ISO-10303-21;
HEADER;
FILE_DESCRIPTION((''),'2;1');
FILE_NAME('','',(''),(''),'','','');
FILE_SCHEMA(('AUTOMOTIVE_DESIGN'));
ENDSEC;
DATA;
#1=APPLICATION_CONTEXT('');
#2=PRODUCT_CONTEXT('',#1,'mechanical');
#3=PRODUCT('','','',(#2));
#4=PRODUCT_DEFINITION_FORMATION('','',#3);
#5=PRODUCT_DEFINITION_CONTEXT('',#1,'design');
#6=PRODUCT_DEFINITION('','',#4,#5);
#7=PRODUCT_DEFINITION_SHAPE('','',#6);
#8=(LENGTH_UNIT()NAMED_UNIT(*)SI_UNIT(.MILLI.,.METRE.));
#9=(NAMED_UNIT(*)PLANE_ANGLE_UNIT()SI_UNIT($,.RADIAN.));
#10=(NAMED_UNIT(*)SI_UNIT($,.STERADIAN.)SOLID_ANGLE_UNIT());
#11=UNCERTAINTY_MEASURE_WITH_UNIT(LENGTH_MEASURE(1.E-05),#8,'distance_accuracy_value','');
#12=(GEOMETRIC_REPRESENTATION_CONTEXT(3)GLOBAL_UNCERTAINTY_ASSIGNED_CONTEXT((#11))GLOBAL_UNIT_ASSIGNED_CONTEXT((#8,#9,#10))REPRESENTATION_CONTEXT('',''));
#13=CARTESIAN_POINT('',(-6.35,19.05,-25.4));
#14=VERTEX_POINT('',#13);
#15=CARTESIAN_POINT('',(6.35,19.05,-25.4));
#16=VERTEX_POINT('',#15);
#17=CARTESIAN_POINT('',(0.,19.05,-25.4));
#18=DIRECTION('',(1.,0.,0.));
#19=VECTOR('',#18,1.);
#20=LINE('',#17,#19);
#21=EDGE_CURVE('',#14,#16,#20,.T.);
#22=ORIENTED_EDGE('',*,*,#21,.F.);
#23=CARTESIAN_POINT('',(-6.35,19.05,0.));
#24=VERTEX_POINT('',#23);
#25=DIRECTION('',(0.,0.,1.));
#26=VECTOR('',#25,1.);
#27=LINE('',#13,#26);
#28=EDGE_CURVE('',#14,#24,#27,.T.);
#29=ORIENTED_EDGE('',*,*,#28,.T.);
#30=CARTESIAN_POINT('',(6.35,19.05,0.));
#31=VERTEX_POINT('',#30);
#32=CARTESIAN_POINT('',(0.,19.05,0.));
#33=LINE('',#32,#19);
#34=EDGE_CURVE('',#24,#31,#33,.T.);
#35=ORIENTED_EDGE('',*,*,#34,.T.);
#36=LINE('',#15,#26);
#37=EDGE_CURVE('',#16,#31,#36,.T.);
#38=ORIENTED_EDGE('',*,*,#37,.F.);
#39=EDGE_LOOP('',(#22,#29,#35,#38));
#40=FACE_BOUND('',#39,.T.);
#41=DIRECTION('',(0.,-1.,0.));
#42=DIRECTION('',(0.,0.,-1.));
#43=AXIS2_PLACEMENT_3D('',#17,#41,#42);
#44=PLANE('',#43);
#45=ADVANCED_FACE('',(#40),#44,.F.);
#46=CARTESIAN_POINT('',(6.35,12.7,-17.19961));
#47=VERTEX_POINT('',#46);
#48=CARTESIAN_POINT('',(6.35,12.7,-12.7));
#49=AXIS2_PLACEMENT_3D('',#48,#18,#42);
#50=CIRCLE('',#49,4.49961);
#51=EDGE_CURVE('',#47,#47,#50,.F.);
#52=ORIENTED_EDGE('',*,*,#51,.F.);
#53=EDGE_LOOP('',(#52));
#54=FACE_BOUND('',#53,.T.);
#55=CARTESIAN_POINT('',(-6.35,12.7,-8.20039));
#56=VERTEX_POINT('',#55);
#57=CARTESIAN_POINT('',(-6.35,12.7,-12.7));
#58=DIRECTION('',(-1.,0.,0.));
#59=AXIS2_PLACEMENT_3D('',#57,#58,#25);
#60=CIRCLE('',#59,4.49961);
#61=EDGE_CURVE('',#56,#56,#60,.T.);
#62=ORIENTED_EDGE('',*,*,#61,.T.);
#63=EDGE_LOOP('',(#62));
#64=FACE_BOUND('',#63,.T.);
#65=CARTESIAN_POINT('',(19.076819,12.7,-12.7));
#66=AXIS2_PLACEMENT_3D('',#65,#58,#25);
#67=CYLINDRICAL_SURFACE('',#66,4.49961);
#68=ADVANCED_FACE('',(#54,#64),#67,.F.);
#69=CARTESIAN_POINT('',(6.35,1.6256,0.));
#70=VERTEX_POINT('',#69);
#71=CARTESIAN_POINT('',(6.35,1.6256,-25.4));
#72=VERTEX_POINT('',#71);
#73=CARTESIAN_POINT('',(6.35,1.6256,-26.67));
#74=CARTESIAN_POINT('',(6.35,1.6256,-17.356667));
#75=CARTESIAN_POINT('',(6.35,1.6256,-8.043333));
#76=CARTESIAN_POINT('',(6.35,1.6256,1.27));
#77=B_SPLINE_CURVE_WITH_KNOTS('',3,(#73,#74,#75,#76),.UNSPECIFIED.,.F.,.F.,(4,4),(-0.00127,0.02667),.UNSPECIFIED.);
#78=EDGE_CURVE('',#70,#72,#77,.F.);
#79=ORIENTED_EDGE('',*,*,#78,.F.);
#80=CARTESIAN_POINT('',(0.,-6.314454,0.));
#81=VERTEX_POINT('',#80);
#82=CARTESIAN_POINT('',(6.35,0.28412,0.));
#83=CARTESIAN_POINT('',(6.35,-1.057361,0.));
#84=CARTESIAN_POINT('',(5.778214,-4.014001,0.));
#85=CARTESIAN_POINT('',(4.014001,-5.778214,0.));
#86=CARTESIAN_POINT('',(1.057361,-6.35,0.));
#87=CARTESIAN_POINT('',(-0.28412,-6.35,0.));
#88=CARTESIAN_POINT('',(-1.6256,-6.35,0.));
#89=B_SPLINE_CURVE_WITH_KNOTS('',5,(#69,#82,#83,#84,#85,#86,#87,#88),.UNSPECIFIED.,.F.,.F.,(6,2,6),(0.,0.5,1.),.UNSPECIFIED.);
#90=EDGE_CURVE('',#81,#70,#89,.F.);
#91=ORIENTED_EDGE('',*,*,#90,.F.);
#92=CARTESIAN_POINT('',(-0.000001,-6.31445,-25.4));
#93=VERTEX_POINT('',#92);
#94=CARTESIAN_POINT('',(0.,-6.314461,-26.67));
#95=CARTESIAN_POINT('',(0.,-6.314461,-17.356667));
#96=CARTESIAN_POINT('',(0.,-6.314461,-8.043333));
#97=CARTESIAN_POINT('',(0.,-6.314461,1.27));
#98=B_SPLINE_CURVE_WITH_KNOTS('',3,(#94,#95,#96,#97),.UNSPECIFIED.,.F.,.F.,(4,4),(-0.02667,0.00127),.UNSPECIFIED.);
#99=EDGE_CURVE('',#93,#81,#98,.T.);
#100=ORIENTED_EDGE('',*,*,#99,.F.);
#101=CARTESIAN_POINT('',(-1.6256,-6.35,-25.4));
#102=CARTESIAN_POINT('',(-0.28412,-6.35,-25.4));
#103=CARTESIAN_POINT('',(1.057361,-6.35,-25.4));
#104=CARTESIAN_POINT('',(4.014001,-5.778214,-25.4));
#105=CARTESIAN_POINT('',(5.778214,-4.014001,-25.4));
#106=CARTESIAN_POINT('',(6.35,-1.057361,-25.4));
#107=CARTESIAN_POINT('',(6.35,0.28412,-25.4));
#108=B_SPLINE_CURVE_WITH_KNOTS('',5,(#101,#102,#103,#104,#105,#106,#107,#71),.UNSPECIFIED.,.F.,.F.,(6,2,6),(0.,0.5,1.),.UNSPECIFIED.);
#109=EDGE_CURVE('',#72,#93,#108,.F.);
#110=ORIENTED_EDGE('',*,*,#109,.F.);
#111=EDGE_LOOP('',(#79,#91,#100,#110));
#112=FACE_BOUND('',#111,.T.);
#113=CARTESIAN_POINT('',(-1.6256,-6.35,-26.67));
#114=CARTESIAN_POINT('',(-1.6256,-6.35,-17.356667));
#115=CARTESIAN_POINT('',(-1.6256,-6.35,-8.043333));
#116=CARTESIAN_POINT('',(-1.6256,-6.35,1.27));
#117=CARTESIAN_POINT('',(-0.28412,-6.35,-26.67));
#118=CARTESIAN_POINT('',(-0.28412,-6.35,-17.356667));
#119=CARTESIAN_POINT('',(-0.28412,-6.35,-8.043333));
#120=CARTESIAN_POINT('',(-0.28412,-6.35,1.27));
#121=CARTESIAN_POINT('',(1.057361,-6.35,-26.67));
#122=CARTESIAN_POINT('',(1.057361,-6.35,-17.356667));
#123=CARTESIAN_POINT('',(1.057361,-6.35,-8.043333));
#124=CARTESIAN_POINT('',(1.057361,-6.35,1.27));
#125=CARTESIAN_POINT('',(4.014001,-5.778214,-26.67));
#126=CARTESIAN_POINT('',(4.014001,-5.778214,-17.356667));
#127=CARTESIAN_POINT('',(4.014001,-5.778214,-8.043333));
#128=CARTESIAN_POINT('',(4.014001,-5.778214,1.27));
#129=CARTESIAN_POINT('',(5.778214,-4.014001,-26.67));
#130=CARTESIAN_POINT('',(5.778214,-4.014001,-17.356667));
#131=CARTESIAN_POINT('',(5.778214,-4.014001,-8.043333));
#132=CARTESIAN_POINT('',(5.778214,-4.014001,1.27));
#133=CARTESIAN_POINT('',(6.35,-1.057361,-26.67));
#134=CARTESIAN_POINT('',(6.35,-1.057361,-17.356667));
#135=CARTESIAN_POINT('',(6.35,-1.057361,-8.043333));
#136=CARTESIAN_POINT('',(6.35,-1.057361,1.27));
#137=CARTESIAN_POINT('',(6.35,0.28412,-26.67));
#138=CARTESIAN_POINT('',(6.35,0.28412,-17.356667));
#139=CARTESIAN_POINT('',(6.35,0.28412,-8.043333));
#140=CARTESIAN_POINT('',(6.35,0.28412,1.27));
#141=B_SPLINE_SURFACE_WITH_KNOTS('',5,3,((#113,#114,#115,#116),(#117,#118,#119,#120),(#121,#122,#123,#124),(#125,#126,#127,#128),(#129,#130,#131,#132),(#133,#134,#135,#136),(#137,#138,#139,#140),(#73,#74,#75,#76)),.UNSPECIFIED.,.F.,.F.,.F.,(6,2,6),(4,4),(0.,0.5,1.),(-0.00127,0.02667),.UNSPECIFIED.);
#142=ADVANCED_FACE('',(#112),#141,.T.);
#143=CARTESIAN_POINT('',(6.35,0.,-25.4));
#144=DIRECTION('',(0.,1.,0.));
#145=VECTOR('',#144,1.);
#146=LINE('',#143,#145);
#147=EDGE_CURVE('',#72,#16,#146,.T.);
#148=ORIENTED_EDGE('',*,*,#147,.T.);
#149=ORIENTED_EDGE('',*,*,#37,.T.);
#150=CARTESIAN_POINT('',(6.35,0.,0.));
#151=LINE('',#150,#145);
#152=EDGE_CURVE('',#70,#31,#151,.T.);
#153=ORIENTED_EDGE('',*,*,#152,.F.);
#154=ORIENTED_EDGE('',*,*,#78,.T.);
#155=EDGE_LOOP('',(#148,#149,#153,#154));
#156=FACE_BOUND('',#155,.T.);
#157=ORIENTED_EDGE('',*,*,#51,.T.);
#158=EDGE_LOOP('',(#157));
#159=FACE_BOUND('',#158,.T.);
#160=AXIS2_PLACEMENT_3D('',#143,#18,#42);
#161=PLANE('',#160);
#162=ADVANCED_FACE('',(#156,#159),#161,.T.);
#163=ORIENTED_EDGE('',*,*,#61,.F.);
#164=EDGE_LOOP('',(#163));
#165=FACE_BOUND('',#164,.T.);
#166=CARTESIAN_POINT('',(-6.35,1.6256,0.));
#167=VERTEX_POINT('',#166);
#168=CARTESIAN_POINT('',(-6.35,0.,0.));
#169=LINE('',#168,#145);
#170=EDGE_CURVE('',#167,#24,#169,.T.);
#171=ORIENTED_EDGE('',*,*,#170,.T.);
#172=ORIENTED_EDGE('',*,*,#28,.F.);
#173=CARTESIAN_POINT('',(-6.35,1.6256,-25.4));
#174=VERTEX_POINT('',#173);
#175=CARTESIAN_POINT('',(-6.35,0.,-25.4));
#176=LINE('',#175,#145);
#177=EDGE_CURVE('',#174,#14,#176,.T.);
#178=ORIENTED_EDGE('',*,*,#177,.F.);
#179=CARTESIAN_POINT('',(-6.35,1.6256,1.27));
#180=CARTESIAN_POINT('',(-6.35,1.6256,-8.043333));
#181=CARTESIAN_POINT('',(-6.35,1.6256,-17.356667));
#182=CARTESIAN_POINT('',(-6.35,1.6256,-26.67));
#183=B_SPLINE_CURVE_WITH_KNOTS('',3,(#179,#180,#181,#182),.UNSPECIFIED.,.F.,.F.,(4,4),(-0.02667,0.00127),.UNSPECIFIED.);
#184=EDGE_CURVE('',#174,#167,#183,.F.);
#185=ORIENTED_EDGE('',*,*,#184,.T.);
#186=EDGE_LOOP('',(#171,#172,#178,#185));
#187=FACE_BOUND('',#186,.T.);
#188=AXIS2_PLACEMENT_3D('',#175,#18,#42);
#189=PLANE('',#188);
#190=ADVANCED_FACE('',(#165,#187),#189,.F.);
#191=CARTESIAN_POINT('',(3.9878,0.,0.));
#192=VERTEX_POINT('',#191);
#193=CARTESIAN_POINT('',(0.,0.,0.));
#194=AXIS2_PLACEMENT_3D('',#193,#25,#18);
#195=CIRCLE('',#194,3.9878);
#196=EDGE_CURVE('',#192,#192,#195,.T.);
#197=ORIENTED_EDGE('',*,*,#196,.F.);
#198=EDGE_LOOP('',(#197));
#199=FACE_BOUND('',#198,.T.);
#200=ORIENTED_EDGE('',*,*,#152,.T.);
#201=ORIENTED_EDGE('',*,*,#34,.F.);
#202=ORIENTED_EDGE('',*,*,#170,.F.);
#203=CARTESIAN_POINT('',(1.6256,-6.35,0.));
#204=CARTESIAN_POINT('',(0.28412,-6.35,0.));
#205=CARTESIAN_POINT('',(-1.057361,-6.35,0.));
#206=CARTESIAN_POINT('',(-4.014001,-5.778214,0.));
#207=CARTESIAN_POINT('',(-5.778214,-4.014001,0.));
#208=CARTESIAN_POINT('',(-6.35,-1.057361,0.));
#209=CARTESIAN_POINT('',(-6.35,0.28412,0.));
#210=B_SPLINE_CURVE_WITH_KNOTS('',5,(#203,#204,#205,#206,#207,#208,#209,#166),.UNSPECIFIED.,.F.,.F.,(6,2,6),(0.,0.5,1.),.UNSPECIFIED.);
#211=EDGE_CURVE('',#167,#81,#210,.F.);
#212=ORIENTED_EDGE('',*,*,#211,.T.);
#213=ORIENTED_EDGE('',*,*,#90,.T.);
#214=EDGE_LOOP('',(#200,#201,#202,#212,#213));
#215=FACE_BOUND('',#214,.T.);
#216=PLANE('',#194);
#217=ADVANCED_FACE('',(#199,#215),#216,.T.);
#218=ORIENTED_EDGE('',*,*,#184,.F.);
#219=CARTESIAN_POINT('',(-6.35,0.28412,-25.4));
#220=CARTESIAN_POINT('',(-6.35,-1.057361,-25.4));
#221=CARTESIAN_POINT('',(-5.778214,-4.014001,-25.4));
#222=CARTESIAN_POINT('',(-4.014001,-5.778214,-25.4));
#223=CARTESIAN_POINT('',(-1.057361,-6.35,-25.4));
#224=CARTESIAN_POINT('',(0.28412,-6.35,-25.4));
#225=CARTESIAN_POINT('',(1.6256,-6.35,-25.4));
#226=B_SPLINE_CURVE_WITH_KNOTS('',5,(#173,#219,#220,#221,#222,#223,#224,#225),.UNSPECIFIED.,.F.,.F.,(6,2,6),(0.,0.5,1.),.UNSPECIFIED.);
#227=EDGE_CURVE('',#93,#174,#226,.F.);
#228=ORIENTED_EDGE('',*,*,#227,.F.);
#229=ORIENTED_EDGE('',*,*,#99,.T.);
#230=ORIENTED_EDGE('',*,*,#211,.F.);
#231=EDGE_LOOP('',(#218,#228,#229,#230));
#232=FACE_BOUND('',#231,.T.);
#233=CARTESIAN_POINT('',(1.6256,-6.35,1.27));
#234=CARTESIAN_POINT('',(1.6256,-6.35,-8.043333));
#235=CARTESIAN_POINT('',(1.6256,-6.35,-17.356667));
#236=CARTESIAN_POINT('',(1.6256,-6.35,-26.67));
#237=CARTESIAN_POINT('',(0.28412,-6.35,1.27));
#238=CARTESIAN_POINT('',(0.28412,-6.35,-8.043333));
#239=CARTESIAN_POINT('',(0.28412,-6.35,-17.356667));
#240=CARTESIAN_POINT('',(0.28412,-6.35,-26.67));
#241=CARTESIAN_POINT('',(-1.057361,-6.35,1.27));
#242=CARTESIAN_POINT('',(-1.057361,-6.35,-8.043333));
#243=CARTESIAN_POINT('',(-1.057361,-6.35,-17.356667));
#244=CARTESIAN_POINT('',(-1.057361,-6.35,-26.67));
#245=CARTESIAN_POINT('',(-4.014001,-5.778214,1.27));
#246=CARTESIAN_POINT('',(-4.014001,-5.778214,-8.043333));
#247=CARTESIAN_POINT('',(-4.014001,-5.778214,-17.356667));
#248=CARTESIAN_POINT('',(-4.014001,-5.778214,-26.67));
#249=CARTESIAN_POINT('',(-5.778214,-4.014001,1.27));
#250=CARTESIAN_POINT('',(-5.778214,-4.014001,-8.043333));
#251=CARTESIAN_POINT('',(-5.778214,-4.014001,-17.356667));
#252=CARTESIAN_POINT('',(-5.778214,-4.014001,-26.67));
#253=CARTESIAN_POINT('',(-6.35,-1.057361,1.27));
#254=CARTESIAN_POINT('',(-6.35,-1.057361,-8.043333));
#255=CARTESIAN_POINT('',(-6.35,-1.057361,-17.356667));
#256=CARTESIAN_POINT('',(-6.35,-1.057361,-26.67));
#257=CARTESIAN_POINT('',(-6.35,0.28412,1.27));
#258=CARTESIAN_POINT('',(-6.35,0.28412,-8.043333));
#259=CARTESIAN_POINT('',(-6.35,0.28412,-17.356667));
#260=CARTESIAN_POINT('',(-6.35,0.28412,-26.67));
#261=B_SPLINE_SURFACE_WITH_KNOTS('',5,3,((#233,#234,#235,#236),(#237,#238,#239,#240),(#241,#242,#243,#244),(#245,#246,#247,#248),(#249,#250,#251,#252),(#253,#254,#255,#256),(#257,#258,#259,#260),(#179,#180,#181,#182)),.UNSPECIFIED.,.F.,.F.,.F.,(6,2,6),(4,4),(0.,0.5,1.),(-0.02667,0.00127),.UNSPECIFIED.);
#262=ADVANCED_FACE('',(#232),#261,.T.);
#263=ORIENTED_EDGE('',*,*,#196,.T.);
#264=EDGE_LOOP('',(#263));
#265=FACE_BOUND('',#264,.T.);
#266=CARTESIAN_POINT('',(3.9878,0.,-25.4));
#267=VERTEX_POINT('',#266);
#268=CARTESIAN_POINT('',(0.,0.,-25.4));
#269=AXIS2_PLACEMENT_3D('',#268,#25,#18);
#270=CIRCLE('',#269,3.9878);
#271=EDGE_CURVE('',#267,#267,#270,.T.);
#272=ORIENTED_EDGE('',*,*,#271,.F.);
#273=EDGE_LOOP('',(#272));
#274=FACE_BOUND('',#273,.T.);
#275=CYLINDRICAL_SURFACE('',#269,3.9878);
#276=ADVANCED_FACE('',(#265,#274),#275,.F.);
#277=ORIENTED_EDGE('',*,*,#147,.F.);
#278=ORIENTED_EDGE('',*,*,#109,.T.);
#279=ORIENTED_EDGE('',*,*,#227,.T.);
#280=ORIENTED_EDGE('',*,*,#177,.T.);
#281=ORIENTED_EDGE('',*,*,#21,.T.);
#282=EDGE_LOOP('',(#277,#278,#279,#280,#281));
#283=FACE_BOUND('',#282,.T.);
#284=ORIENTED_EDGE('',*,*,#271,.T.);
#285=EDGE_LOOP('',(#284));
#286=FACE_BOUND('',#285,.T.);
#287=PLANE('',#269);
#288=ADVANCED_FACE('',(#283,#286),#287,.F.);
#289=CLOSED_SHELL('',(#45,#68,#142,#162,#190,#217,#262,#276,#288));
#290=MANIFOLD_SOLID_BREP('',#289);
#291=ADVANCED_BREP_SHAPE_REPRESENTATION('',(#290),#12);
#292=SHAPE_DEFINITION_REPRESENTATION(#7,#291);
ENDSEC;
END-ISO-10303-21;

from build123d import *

# Parameters (mm, degrees)
SKETCH1_W           = 12.7
SKETCH1_H           = 12.7
SKETCH1_R           = 3.9878
BOSS_EXTRUDE1_DEPTH = 25.4
SKETCH2_R           = 4.49961
CUT_EXTRUDE1_DEPTH  = 12.7
FILLET1_SIZE        = 7.9756


with BuildPart() as part:
    # Sketch1 → Boss-Extrude1 (new body)
    # profile 1 of 2: a face of its own
    with BuildSketch(Plane.XY):
        with Locations((0, 12.7)):
            Rectangle(SKETCH1_W, SKETCH1_H)
    # profile 2 of 2: a face of its own
    with BuildSketch(Plane.XY):
        Rectangle(SKETCH1_W, SKETCH1_H)
        Circle(SKETCH1_R, mode=Mode.SUBTRACT)
    extrude(amount=-BOSS_EXTRUDE1_DEPTH)

    # Sketch2 → Cut-Extrude1 (cut)
    with BuildSketch(Plane.ZY.offset(6.35)):
        with Locations((-12.7, 12.7)):
            Circle(SKETCH2_R)
    extrude(amount=-CUT_EXTRUDE1_DEPTH, mode=Mode.SUBTRACT)

    # Fillet1
    # a fillet whose section is not a circle: 7.9756 mm, written as the material it takes off along each edge
    with BuildSketch(Plane(origin=(-6.35, -6.35, 19.939), x_dir=(1, 0, 0), z_dir=(0, 0, -1)), Plane(origin=(6.35, -6.35, 19.939), x_dir=(0, 1, 0), z_dir=(0, 0, -1))) as fillet1_piece_1:
        with BuildLine():
            add(Edge.make_bspline([(FILLET1_SIZE, 0), (FILLET1_SIZE * 0.831801948466, 0), (FILLET1_SIZE * 0.663603896932, 0), (FILLET1_SIZE * 0.292893218813, -FILLET1_SIZE * 0.0716919198361), (FILLET1_SIZE * 0.0716919198361, -FILLET1_SIZE * 0.292893218813), (0, -FILLET1_SIZE * 0.663603896932), (0, -FILLET1_SIZE * 0.831801948466), (0, -FILLET1_SIZE)], knots=[0, 0, 0, 0, 0, 0, 0.5, 0.5, 1, 1, 1, 1, 1, 1], degree=5))
            Line((0, -FILLET1_SIZE), (0, 0))
            Line((0, 0), (FILLET1_SIZE, 0))
        make_face()
    extrude(amount=65.278, mode=Mode.SUBTRACT)


solid = part.part
